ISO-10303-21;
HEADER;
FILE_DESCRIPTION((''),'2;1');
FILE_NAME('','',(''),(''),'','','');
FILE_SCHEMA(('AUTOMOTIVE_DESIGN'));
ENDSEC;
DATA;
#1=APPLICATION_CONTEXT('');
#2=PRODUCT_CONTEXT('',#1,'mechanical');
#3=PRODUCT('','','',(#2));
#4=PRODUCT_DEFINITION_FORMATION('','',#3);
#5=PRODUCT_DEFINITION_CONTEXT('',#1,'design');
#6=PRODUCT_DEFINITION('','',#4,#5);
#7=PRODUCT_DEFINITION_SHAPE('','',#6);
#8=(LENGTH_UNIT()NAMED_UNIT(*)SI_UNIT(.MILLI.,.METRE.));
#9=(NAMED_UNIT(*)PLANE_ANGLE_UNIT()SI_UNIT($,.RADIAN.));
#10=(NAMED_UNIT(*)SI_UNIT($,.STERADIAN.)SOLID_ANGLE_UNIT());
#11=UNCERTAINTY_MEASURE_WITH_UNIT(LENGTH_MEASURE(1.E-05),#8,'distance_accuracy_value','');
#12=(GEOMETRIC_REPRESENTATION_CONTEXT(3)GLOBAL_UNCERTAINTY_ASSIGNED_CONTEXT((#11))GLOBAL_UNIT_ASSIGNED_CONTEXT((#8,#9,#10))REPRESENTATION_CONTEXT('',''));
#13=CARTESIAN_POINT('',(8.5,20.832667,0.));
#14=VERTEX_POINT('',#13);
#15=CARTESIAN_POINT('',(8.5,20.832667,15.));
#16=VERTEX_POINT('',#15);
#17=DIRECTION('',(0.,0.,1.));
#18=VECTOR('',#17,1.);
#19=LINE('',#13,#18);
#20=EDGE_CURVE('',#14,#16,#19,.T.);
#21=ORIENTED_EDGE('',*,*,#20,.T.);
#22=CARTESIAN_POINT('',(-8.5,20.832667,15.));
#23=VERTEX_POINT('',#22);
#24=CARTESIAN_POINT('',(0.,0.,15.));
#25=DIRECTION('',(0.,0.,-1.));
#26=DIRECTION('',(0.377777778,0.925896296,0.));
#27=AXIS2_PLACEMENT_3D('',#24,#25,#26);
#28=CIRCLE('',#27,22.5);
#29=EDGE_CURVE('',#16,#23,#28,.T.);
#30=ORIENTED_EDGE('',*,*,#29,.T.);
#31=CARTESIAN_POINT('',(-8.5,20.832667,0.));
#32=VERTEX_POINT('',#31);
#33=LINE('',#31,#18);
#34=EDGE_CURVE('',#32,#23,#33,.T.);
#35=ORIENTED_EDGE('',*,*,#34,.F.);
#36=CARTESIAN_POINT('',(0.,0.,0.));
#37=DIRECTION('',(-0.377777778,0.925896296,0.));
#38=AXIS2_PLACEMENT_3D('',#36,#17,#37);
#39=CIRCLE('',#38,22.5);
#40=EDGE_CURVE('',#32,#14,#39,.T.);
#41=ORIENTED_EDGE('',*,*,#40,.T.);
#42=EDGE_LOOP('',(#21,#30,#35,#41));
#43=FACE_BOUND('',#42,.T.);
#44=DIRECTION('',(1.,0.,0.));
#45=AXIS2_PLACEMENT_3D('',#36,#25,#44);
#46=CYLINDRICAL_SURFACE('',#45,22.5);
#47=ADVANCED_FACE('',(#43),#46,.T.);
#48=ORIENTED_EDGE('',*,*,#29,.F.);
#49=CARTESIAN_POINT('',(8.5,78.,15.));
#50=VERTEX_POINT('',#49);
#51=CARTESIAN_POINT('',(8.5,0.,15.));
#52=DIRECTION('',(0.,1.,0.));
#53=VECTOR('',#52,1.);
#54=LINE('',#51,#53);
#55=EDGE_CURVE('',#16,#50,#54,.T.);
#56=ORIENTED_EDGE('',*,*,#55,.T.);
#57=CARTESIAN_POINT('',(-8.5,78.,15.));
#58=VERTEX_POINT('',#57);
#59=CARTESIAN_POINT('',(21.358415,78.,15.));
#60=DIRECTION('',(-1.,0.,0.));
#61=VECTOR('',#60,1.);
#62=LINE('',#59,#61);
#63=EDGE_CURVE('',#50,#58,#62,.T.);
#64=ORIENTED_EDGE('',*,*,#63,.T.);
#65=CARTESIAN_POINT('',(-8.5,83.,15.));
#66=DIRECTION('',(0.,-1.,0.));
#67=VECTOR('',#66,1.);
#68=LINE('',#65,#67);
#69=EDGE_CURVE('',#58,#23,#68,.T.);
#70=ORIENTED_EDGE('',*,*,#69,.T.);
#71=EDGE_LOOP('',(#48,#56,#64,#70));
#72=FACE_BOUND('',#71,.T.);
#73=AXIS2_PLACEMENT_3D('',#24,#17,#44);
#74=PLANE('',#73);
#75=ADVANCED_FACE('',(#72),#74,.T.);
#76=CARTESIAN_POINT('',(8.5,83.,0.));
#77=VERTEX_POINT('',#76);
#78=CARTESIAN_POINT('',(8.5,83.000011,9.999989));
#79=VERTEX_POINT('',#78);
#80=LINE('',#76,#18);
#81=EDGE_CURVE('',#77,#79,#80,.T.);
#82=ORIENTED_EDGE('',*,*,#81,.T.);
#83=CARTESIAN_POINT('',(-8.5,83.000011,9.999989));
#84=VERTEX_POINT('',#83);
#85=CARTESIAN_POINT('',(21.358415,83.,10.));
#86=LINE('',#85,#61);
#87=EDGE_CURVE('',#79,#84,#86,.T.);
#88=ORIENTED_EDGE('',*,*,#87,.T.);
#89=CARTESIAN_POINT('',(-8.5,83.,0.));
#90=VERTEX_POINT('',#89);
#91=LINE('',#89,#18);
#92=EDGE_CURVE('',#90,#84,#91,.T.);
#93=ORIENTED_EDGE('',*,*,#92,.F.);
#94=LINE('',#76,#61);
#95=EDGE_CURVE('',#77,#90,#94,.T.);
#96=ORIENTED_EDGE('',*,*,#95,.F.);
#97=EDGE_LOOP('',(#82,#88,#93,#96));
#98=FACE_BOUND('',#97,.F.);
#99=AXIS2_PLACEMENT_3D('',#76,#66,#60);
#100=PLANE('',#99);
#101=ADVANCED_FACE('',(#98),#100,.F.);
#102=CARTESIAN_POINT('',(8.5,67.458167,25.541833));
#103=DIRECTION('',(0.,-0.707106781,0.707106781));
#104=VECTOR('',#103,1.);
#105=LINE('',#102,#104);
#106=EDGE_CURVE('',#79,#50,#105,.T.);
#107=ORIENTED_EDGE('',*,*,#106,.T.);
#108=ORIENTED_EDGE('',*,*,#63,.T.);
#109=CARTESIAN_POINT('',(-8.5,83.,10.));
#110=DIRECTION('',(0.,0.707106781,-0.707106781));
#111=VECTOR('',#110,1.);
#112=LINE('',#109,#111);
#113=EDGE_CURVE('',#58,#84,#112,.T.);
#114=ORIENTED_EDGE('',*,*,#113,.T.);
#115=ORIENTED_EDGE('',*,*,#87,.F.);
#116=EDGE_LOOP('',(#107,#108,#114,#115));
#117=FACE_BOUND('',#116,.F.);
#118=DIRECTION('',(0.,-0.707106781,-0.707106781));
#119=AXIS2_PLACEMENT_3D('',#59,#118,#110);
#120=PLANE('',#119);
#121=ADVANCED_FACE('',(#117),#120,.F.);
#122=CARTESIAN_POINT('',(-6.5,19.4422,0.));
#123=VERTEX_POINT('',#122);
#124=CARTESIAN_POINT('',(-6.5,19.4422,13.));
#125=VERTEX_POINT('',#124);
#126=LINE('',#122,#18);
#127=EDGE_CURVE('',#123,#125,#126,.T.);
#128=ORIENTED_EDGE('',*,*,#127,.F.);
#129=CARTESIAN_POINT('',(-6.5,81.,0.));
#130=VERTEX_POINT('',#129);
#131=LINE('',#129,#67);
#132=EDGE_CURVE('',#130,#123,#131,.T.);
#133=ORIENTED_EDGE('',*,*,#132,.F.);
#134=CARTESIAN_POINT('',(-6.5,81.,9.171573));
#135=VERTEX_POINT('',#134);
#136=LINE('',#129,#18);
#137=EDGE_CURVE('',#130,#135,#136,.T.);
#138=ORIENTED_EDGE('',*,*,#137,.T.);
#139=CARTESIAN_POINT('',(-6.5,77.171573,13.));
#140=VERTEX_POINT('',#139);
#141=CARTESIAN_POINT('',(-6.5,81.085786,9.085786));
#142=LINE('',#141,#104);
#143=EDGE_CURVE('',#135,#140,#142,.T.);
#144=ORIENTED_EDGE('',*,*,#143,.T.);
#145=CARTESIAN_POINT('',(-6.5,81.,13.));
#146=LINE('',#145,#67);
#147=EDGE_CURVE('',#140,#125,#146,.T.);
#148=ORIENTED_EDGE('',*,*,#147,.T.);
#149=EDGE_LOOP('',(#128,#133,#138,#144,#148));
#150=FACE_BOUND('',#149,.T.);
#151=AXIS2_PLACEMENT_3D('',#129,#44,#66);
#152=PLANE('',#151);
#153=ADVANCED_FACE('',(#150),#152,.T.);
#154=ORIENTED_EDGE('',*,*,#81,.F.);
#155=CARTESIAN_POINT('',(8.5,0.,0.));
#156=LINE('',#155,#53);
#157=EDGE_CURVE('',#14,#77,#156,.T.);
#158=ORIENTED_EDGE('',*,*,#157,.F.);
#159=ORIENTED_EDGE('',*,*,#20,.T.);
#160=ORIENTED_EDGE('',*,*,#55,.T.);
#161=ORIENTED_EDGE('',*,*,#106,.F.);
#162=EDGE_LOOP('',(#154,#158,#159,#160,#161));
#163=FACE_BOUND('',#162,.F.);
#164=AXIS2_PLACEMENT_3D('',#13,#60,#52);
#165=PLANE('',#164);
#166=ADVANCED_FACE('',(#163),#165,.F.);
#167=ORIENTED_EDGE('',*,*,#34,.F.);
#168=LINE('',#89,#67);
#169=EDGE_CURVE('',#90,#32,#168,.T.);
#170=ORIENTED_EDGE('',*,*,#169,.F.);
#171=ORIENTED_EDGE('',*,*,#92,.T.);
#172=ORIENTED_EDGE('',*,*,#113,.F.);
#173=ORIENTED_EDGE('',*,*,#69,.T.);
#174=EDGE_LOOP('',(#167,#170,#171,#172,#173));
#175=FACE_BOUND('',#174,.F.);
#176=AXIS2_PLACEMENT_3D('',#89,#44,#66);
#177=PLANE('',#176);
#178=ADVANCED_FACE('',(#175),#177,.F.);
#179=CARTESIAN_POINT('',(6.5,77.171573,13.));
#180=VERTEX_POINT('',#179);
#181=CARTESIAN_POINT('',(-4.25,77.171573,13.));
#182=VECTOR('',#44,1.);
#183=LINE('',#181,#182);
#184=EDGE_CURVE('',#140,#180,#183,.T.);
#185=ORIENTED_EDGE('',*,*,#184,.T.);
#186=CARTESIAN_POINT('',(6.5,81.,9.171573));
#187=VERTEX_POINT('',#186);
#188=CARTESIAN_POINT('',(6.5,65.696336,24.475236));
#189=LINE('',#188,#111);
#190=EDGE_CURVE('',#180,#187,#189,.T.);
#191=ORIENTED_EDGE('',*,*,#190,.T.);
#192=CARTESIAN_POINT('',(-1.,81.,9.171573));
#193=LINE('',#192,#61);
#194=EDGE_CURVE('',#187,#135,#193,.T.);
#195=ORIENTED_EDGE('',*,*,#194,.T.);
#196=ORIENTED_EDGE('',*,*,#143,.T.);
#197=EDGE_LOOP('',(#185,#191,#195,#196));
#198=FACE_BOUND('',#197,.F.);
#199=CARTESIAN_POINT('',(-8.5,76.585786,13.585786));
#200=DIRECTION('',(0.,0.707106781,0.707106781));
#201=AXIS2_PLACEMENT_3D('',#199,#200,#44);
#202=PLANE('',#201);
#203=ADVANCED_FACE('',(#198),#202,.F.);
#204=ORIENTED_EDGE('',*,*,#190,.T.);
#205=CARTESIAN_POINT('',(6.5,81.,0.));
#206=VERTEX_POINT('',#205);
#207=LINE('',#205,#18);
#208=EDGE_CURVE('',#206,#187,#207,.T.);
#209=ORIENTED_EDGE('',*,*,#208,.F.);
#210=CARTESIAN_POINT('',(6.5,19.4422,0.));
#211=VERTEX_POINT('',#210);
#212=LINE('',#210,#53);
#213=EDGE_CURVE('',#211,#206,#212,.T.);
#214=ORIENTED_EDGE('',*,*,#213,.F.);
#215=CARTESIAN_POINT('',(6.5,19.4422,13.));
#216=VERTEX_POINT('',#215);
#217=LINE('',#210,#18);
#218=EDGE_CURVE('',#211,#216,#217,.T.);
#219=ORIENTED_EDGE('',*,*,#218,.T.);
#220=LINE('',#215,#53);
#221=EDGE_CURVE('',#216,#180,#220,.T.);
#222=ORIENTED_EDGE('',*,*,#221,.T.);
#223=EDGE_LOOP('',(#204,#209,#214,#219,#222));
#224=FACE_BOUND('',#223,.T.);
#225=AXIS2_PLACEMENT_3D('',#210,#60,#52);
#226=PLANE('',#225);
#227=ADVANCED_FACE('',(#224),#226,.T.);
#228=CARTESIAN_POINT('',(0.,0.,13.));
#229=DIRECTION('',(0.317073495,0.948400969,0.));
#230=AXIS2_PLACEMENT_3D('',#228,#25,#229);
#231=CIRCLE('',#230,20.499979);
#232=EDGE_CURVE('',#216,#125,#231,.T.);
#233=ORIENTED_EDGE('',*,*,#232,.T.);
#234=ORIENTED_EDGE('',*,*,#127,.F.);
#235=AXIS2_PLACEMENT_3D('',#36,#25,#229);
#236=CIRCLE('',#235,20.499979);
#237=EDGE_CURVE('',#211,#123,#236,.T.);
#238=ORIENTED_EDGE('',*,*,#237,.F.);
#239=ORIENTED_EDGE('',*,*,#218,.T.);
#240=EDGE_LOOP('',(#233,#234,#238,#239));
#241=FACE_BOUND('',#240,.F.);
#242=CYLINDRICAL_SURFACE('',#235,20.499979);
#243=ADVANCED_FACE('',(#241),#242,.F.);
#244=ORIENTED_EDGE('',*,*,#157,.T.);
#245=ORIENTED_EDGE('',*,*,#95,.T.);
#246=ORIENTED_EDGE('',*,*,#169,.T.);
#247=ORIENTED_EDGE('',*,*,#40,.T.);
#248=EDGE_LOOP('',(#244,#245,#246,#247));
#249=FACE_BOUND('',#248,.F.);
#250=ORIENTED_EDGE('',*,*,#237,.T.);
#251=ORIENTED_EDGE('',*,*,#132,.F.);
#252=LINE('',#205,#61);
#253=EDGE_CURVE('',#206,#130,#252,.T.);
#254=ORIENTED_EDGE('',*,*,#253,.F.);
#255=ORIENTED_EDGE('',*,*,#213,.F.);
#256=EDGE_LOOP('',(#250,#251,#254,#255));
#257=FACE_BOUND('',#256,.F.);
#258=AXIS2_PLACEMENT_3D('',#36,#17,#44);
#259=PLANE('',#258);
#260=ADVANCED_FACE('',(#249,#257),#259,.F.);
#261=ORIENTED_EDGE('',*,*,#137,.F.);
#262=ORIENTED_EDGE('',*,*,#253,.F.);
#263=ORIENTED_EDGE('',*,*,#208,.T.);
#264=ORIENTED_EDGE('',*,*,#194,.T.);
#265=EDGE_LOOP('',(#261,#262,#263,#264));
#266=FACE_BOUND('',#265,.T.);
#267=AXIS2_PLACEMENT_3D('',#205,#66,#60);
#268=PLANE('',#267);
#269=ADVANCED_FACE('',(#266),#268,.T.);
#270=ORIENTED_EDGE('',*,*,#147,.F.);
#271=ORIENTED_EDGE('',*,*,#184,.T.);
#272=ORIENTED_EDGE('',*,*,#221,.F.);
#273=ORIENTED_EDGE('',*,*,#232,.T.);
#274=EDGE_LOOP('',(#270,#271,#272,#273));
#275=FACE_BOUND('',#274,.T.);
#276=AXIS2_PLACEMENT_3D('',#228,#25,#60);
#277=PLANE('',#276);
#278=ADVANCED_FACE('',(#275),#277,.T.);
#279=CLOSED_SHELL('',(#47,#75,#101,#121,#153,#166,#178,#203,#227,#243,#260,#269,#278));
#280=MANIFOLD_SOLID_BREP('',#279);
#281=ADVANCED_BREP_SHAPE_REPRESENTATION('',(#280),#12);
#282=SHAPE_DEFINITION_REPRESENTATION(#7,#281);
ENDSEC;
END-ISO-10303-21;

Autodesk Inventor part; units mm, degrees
ref_plane "YZ Plane" through (0, 0, 0) normal (1, 0, 0) x (0, 1, 0)
ref_plane "XZ Plane" through (0, 0, 0) normal (0, 1, 0) x (-1, 0, 0)
ref_plane "XY Plane" through (0, 0, 0) normal (0, 0, 1) x (1, 0, 0)
sketch "Sketch3" plane through (0, 0, 0) normal (0, 0, 1) x (1, 0, 0)
  circle A0 centre (0, 0) radius 22.5
  line L0 (-8.5, 0) -> (8.5, 0)
  line L1 (8.5, 0) -> (8.5, 83)
  line L2 (8.5, 83) -> (-8.5, 83)
  line L3 (-8.5, 83) -> (-8.5, 0)
  dimension "d5" = 45
  dimension "d6" = 83
  dimension "d7" = 17
extrude "Extrusion3" add sketch "Sketch3" along normal blind 15
sketch "Sketch4" plane through (0, 0, 0) normal (0, 0, -1) x (-1, 0, 0)
  arc A0 (-8.5, 20.8327) -> (8.5, 20.8327) centre (0, 0) ccw projected
  line L0 (8.5, 83) -> (8.5, 20.8327) projected
  line L1 (-8.5, 83) -> (8.5, 83) projected
  line L2 (-8.5, 20.8327) -> (-8.5, 83) projected
  arc A1 (-6.5, 19.4422) -> (6.5, 19.4422) centre (0, 0) ccw
  line L3 (-6.5, 19.4422) -> (-6.5, 81)
  line L4 (-6.5, 81) -> (6.5, 81)
  line L5 (6.5, 81) -> (6.5, 19.4422)
  dimension "d10" = 2
extrude "Extrusion4" cut sketch "Sketch4" against normal blind 13 contours L3 L4 L5 A1
chamfer "Chamfer1" distance 5 angle 45 1 edges at (0, 83, 15)
sketch "Sketch6" plane through (-8.5, 78, 15) normal (0, 0.7071068, 0.7071068) x (1, 0, 0)
  line L0 (2, 2.8284) -> (2, 4.2426) projected
  line L1 (2, 4.2426) -> (15, 4.2426) projected
  line L2 (15, 4.2426) -> (15, 2.8284) projected
  line L3 (15, 2.8284) -> (2, 2.8284) projected
  line L4 (0, 7.0711) -> (0, 0) projected
  line L5 (0, 0) -> (17, 0) projected
  line L6 (17, 0) -> (17, 7.0711) projected
  line L7 (17, 7.0711) -> (0, 7.0711) projected
  point P0 (8.5, -44.5477)
extrude "Extrusion5" add sketch "Sketch6" against normal blind 2 contours L0 L1 L2 L3 | L7 L6 L5 L4
properties part number "TARM10" material "ABS Plastic"
